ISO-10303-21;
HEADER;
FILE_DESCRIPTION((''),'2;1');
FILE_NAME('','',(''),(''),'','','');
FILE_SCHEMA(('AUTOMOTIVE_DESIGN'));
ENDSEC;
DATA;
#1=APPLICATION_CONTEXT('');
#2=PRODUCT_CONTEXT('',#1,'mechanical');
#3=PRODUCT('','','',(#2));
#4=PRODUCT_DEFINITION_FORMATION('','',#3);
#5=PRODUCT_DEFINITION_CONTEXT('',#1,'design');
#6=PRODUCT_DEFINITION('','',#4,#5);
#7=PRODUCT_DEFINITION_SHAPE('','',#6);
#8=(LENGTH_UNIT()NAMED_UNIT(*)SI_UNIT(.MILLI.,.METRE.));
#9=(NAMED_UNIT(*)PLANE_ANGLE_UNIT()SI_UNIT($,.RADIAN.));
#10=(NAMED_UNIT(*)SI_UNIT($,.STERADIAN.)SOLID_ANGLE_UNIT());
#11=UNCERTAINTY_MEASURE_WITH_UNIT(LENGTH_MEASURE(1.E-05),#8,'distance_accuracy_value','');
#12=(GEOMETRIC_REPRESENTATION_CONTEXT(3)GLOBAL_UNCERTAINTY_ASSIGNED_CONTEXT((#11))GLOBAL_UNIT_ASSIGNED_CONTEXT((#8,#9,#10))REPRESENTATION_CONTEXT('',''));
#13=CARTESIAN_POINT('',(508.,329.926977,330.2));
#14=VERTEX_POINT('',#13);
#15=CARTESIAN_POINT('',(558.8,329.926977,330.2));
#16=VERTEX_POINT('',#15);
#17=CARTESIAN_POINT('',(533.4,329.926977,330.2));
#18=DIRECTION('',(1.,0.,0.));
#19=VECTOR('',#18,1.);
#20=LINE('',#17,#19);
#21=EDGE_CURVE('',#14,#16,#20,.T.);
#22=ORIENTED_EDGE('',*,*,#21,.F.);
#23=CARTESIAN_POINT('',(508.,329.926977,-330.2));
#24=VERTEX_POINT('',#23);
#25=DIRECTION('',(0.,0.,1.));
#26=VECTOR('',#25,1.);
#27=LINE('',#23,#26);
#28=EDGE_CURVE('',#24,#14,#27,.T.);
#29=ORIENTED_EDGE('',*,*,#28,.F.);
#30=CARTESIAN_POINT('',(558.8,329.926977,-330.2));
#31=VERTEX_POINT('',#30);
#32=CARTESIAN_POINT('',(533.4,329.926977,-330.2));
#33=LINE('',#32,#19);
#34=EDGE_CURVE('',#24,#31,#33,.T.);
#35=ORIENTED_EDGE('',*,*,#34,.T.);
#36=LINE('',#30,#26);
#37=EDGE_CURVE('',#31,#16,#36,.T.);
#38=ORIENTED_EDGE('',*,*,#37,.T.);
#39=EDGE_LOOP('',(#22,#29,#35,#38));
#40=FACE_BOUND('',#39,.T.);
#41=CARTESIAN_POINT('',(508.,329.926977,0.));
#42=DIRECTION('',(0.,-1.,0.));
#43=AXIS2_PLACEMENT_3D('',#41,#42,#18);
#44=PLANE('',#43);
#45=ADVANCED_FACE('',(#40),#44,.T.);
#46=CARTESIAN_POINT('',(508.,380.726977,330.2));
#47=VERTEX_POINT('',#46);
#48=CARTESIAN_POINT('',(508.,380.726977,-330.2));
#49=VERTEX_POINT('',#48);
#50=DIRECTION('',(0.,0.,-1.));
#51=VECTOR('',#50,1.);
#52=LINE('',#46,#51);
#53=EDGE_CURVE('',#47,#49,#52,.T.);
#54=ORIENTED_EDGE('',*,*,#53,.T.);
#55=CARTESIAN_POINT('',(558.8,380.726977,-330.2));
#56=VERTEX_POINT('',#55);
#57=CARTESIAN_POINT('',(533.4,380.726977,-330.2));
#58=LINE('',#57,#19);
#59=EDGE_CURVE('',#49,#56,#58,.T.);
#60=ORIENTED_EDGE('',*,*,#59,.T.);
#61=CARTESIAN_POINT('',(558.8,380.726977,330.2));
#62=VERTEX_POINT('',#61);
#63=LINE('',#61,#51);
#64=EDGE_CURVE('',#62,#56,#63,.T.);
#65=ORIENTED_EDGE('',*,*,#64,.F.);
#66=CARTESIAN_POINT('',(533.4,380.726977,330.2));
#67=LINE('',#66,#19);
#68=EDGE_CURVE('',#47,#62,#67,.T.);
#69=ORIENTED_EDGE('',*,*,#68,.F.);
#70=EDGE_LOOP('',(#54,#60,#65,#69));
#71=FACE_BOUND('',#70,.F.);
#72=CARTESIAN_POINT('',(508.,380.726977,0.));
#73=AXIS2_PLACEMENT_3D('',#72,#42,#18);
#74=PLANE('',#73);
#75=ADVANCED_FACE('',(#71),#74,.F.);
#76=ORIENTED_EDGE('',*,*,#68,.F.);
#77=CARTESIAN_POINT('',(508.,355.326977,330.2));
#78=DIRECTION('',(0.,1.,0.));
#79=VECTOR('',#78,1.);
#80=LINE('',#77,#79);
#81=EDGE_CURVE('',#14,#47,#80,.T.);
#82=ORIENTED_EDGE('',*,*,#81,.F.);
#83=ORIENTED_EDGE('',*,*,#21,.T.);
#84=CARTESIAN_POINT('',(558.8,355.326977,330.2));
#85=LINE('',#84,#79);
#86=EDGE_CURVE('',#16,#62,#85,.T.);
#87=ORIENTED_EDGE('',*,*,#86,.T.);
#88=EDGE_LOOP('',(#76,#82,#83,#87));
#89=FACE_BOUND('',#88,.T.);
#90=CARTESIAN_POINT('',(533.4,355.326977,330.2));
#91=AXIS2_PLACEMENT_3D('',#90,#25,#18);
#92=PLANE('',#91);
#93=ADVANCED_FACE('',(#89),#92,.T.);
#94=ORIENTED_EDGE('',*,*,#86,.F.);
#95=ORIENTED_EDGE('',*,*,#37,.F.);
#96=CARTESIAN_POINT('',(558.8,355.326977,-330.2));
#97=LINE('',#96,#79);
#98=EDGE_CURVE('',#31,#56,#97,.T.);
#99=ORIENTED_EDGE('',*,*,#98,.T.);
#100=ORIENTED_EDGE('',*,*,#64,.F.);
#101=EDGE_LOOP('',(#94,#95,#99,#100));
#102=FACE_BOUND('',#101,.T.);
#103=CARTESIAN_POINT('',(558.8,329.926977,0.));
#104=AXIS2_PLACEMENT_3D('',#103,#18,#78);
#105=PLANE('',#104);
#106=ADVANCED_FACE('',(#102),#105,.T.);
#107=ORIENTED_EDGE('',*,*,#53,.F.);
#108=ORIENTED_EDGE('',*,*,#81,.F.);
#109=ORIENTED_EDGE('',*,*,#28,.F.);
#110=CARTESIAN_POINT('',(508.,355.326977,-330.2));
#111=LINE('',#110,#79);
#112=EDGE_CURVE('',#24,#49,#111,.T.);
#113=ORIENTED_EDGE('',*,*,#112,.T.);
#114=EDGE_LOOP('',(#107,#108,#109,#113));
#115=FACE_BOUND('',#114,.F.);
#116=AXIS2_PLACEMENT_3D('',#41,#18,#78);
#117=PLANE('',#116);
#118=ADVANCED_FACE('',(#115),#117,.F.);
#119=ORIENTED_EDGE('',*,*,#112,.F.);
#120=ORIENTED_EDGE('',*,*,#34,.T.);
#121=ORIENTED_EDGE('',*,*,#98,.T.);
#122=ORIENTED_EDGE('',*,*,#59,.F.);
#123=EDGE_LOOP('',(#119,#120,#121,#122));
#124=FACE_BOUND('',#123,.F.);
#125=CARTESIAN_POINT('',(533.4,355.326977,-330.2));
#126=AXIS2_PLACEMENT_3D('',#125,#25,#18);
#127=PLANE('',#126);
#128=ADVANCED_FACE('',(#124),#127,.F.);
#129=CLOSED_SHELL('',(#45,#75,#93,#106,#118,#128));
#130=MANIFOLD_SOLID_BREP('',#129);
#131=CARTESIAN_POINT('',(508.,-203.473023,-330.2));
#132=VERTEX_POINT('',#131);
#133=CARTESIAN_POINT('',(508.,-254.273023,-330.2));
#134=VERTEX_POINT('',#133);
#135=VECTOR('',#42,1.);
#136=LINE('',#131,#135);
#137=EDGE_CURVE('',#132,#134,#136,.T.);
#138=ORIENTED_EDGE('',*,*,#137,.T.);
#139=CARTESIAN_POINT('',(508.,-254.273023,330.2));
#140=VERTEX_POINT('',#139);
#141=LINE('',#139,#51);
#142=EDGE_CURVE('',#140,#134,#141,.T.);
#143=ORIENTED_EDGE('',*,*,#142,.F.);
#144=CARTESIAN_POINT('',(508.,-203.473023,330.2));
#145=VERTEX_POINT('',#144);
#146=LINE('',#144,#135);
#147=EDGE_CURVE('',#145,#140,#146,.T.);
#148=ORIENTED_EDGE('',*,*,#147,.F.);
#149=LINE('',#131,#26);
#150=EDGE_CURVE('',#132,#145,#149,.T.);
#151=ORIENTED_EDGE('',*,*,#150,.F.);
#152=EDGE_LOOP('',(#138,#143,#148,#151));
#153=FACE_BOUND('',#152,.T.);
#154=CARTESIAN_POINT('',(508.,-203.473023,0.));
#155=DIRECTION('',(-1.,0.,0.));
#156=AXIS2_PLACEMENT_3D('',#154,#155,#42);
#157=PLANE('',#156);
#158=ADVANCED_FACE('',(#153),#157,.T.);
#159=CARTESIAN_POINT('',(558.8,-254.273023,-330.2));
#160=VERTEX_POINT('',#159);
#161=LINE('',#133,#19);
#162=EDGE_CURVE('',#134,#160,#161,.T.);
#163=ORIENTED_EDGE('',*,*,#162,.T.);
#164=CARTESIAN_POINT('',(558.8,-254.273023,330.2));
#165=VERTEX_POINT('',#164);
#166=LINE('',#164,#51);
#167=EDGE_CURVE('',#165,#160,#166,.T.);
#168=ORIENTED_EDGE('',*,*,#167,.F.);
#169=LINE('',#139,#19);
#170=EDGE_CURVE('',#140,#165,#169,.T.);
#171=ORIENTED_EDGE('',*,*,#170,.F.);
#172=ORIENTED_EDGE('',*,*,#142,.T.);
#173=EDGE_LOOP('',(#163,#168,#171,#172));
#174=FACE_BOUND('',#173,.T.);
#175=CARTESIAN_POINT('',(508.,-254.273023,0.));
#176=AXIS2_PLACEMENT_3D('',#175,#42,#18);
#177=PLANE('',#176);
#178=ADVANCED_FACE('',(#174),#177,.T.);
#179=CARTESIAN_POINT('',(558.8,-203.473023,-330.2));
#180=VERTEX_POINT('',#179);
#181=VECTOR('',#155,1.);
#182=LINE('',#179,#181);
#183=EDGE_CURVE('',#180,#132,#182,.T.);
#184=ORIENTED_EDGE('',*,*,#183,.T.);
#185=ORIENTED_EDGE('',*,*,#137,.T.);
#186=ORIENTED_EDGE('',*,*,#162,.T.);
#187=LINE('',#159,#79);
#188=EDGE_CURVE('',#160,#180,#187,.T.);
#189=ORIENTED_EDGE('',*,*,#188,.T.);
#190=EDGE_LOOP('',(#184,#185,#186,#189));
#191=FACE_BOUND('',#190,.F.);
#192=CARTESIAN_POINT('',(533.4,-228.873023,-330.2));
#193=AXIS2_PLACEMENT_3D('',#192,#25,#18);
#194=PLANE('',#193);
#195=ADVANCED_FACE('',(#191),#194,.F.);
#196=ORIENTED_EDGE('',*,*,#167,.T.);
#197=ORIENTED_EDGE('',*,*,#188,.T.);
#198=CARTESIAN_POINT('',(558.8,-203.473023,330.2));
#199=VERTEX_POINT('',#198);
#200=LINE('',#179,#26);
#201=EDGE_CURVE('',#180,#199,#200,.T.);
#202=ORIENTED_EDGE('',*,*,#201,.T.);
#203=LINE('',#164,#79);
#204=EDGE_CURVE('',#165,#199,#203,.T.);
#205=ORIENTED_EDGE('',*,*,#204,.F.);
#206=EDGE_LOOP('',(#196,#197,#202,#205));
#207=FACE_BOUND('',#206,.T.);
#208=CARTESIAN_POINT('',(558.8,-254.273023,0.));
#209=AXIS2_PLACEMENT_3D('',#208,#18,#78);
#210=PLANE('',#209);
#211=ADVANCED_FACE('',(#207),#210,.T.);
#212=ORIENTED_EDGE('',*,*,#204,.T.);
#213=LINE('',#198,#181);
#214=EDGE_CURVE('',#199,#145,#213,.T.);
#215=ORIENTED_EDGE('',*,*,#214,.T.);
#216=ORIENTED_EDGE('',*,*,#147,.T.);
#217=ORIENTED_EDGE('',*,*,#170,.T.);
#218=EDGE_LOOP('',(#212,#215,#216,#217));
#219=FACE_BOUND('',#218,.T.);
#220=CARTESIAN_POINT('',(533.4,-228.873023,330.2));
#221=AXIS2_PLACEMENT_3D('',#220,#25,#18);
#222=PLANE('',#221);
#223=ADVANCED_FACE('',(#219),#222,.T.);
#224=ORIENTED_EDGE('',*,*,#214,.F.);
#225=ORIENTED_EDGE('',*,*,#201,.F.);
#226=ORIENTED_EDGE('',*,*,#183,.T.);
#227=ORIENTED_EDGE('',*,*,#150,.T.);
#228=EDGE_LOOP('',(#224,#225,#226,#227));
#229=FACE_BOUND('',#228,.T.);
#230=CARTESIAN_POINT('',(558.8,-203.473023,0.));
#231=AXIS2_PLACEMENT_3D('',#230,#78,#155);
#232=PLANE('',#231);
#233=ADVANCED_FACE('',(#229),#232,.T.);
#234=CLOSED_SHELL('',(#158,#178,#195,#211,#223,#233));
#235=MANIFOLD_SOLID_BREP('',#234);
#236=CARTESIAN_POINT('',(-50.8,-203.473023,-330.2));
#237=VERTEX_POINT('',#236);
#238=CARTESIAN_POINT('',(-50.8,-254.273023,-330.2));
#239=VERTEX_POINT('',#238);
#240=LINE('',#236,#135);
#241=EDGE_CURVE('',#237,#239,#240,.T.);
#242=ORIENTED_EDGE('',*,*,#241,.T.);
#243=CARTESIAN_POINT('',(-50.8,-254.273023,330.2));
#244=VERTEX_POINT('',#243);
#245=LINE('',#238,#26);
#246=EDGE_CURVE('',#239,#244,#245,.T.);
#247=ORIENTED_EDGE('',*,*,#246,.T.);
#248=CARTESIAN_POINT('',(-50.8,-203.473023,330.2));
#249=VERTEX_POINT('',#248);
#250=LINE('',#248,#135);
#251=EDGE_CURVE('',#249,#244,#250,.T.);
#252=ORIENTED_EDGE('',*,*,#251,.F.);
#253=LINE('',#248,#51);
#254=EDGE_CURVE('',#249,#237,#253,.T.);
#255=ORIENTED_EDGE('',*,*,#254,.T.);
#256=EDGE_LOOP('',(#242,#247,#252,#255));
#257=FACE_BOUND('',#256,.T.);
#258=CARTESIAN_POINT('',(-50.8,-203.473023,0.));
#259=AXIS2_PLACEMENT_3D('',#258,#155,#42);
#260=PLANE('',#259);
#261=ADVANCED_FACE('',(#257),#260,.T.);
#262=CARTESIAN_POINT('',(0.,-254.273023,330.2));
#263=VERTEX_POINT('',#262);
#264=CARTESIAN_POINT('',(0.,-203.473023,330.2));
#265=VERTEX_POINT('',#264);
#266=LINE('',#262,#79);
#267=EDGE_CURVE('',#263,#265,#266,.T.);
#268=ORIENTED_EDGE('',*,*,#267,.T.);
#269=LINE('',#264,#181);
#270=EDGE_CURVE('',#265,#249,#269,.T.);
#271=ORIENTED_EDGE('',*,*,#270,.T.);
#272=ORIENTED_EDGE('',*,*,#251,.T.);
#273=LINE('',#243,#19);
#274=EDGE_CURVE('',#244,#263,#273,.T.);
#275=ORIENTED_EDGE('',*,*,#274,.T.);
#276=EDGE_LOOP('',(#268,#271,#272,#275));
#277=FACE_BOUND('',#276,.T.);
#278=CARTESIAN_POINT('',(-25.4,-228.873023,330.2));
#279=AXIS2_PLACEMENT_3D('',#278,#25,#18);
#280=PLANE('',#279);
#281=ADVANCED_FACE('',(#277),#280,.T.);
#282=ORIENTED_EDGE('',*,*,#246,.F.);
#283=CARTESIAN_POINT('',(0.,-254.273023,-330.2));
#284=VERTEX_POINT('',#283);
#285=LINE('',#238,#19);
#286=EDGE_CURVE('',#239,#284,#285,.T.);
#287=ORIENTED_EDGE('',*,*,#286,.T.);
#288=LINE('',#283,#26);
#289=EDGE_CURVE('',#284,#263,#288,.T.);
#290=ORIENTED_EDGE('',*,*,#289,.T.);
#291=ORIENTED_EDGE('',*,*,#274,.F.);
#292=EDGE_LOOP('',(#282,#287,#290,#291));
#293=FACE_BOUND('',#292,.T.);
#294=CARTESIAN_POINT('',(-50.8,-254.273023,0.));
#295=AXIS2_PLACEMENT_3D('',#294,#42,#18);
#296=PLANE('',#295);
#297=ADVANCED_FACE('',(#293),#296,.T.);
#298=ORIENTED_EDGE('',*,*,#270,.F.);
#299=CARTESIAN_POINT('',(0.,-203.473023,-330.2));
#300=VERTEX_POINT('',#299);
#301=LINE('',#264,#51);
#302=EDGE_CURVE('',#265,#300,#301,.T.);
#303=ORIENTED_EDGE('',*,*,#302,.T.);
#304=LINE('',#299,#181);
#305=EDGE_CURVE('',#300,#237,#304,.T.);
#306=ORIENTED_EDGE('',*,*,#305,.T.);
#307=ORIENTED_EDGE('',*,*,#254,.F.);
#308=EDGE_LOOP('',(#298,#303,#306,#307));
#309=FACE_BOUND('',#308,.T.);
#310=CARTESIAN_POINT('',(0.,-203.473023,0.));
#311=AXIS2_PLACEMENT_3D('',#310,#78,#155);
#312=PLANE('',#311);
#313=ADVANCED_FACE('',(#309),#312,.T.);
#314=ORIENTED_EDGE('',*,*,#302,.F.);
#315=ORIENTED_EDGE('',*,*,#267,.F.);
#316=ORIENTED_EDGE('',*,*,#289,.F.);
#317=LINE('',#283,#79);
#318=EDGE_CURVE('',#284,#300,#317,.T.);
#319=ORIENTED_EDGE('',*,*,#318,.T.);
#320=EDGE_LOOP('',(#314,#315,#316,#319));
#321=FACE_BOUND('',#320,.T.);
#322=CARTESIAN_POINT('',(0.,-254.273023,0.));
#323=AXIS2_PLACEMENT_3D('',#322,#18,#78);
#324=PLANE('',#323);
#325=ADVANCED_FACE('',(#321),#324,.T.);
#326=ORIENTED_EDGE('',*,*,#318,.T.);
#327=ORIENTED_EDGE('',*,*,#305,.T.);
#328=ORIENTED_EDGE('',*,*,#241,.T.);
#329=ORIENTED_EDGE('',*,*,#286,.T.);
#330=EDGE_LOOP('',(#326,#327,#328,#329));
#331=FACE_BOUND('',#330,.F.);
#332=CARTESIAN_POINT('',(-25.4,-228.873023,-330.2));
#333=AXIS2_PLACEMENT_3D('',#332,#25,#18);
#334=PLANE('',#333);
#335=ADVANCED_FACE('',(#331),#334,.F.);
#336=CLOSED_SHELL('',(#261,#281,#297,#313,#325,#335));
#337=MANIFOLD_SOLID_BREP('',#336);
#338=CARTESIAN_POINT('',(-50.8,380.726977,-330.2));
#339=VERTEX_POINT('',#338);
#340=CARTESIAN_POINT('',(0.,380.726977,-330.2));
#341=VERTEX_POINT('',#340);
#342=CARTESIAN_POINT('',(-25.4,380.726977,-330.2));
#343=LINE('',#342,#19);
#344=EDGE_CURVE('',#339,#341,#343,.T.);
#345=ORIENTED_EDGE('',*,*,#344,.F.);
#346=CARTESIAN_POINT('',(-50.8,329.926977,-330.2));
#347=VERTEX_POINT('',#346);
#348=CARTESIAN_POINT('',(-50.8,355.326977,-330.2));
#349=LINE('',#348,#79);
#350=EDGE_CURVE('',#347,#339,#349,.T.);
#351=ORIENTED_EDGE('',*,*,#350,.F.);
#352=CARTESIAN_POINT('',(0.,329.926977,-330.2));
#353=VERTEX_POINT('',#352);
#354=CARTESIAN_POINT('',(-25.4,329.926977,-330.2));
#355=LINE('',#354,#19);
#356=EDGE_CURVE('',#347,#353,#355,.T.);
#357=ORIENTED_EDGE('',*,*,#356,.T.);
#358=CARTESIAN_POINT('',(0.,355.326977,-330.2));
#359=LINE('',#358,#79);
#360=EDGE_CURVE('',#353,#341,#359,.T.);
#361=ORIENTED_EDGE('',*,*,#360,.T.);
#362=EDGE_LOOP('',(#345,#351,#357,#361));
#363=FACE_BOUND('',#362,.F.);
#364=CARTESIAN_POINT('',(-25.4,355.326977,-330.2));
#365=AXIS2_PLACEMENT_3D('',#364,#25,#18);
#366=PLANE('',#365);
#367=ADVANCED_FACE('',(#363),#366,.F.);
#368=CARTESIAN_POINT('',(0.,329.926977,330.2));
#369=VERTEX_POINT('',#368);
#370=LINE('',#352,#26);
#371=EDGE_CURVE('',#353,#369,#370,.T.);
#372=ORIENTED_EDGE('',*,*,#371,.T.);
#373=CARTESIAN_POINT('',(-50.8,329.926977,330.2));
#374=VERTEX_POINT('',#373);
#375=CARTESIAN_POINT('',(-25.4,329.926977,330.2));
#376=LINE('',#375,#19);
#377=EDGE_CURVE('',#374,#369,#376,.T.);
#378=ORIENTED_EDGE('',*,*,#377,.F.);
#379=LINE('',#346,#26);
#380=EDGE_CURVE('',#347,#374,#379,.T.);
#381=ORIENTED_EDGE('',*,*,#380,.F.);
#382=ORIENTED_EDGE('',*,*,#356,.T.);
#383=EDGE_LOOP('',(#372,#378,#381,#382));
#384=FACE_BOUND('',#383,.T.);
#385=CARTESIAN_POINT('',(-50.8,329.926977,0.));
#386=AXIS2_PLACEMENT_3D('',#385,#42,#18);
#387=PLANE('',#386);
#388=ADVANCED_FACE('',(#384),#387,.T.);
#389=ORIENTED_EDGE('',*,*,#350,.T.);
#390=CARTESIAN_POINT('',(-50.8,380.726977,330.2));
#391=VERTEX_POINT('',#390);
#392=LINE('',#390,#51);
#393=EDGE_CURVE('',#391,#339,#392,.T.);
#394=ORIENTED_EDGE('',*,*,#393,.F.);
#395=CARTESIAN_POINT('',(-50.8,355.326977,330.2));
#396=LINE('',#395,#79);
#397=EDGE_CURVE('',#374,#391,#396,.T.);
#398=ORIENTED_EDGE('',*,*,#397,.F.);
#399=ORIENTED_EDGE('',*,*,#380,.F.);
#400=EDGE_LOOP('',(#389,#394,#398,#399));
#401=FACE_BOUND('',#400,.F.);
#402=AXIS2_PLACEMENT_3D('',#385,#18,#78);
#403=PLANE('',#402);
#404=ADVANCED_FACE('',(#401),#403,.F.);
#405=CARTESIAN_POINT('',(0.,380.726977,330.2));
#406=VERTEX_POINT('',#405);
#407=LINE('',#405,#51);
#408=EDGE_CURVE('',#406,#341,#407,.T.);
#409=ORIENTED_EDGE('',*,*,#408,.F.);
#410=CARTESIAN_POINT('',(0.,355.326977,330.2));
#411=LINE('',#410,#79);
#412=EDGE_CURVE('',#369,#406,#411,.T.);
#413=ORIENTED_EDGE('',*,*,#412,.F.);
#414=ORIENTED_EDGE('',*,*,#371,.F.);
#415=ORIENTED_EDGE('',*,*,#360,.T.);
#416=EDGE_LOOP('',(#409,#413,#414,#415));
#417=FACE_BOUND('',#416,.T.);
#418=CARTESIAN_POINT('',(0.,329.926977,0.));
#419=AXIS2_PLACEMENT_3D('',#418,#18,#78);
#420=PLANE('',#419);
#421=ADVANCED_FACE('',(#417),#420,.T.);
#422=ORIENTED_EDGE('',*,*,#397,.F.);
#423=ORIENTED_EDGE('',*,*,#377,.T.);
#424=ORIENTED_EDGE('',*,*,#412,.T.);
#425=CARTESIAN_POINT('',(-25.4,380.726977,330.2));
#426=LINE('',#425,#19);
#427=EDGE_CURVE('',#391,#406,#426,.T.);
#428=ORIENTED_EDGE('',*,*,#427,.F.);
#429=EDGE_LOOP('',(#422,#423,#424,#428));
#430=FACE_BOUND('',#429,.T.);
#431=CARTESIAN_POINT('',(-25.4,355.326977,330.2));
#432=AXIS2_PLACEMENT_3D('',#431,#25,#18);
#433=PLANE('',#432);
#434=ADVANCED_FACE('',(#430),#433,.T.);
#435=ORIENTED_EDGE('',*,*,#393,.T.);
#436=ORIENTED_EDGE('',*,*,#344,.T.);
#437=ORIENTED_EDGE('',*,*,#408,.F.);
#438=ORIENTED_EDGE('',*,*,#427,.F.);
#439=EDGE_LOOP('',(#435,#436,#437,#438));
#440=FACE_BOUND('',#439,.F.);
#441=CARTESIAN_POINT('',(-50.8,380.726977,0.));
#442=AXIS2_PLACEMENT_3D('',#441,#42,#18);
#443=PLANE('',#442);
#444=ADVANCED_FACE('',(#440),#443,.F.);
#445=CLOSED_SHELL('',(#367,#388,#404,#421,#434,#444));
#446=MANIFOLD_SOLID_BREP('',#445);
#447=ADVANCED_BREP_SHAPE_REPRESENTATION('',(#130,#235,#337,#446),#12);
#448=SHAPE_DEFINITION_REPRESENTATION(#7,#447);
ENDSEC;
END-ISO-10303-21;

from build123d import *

# Parameters (mm, degrees)
F0_W     = 50.8
F0_H     = 50.8
F1_DEPTH = 330.2


# Not quite as in the source:
# - a feature names something its author has since deleted; it is built from what else it names


with BuildPart() as f1:
    # F0 (on Top) → F1 (new body, symmetric)
    with BuildSketch(Plane.XY):
        with Locations((-25.4, 355.3269766333)):
            Rectangle(F0_W, F0_H)
    extrude(amount=F1_DEPTH, both=True)


with BuildPart() as f1b:
    # F0 (on Top) → F1, piece 2 (new body, symmetric)
    with BuildSketch(Plane.XY):
        Polygon((-25.4, -203.4730233667), (-50.8, -203.4730233667), (-50.8, -254.2730233667), (0, -254.2730233667), (0, -203.4730233667), align=None)
    extrude(amount=F1_DEPTH, both=True)


with BuildPart() as f1c:
    # F0 (on Top) → F1, piece 3 (new body, symmetric)
    with BuildSketch(Plane.XY):
        Polygon((558.8, -254.2730233667), (558.8, -203.4730233667), (508, -203.4730233667), (508, -228.8730233667), (508, -254.2730233667), align=None)
    extrude(amount=F1_DEPTH, both=True)


with BuildPart() as f1d:
    # F0 (on Top) → F1, piece 4 (new body, symmetric)
    with BuildSketch(Plane.XY):
        with Locations((533.4, 355.3269766333)):
            Rectangle(F0_W, F0_H)
    extrude(amount=F1_DEPTH, both=True)


solid = Compound([f1.part, f1b.part, f1c.part, f1d.part])
